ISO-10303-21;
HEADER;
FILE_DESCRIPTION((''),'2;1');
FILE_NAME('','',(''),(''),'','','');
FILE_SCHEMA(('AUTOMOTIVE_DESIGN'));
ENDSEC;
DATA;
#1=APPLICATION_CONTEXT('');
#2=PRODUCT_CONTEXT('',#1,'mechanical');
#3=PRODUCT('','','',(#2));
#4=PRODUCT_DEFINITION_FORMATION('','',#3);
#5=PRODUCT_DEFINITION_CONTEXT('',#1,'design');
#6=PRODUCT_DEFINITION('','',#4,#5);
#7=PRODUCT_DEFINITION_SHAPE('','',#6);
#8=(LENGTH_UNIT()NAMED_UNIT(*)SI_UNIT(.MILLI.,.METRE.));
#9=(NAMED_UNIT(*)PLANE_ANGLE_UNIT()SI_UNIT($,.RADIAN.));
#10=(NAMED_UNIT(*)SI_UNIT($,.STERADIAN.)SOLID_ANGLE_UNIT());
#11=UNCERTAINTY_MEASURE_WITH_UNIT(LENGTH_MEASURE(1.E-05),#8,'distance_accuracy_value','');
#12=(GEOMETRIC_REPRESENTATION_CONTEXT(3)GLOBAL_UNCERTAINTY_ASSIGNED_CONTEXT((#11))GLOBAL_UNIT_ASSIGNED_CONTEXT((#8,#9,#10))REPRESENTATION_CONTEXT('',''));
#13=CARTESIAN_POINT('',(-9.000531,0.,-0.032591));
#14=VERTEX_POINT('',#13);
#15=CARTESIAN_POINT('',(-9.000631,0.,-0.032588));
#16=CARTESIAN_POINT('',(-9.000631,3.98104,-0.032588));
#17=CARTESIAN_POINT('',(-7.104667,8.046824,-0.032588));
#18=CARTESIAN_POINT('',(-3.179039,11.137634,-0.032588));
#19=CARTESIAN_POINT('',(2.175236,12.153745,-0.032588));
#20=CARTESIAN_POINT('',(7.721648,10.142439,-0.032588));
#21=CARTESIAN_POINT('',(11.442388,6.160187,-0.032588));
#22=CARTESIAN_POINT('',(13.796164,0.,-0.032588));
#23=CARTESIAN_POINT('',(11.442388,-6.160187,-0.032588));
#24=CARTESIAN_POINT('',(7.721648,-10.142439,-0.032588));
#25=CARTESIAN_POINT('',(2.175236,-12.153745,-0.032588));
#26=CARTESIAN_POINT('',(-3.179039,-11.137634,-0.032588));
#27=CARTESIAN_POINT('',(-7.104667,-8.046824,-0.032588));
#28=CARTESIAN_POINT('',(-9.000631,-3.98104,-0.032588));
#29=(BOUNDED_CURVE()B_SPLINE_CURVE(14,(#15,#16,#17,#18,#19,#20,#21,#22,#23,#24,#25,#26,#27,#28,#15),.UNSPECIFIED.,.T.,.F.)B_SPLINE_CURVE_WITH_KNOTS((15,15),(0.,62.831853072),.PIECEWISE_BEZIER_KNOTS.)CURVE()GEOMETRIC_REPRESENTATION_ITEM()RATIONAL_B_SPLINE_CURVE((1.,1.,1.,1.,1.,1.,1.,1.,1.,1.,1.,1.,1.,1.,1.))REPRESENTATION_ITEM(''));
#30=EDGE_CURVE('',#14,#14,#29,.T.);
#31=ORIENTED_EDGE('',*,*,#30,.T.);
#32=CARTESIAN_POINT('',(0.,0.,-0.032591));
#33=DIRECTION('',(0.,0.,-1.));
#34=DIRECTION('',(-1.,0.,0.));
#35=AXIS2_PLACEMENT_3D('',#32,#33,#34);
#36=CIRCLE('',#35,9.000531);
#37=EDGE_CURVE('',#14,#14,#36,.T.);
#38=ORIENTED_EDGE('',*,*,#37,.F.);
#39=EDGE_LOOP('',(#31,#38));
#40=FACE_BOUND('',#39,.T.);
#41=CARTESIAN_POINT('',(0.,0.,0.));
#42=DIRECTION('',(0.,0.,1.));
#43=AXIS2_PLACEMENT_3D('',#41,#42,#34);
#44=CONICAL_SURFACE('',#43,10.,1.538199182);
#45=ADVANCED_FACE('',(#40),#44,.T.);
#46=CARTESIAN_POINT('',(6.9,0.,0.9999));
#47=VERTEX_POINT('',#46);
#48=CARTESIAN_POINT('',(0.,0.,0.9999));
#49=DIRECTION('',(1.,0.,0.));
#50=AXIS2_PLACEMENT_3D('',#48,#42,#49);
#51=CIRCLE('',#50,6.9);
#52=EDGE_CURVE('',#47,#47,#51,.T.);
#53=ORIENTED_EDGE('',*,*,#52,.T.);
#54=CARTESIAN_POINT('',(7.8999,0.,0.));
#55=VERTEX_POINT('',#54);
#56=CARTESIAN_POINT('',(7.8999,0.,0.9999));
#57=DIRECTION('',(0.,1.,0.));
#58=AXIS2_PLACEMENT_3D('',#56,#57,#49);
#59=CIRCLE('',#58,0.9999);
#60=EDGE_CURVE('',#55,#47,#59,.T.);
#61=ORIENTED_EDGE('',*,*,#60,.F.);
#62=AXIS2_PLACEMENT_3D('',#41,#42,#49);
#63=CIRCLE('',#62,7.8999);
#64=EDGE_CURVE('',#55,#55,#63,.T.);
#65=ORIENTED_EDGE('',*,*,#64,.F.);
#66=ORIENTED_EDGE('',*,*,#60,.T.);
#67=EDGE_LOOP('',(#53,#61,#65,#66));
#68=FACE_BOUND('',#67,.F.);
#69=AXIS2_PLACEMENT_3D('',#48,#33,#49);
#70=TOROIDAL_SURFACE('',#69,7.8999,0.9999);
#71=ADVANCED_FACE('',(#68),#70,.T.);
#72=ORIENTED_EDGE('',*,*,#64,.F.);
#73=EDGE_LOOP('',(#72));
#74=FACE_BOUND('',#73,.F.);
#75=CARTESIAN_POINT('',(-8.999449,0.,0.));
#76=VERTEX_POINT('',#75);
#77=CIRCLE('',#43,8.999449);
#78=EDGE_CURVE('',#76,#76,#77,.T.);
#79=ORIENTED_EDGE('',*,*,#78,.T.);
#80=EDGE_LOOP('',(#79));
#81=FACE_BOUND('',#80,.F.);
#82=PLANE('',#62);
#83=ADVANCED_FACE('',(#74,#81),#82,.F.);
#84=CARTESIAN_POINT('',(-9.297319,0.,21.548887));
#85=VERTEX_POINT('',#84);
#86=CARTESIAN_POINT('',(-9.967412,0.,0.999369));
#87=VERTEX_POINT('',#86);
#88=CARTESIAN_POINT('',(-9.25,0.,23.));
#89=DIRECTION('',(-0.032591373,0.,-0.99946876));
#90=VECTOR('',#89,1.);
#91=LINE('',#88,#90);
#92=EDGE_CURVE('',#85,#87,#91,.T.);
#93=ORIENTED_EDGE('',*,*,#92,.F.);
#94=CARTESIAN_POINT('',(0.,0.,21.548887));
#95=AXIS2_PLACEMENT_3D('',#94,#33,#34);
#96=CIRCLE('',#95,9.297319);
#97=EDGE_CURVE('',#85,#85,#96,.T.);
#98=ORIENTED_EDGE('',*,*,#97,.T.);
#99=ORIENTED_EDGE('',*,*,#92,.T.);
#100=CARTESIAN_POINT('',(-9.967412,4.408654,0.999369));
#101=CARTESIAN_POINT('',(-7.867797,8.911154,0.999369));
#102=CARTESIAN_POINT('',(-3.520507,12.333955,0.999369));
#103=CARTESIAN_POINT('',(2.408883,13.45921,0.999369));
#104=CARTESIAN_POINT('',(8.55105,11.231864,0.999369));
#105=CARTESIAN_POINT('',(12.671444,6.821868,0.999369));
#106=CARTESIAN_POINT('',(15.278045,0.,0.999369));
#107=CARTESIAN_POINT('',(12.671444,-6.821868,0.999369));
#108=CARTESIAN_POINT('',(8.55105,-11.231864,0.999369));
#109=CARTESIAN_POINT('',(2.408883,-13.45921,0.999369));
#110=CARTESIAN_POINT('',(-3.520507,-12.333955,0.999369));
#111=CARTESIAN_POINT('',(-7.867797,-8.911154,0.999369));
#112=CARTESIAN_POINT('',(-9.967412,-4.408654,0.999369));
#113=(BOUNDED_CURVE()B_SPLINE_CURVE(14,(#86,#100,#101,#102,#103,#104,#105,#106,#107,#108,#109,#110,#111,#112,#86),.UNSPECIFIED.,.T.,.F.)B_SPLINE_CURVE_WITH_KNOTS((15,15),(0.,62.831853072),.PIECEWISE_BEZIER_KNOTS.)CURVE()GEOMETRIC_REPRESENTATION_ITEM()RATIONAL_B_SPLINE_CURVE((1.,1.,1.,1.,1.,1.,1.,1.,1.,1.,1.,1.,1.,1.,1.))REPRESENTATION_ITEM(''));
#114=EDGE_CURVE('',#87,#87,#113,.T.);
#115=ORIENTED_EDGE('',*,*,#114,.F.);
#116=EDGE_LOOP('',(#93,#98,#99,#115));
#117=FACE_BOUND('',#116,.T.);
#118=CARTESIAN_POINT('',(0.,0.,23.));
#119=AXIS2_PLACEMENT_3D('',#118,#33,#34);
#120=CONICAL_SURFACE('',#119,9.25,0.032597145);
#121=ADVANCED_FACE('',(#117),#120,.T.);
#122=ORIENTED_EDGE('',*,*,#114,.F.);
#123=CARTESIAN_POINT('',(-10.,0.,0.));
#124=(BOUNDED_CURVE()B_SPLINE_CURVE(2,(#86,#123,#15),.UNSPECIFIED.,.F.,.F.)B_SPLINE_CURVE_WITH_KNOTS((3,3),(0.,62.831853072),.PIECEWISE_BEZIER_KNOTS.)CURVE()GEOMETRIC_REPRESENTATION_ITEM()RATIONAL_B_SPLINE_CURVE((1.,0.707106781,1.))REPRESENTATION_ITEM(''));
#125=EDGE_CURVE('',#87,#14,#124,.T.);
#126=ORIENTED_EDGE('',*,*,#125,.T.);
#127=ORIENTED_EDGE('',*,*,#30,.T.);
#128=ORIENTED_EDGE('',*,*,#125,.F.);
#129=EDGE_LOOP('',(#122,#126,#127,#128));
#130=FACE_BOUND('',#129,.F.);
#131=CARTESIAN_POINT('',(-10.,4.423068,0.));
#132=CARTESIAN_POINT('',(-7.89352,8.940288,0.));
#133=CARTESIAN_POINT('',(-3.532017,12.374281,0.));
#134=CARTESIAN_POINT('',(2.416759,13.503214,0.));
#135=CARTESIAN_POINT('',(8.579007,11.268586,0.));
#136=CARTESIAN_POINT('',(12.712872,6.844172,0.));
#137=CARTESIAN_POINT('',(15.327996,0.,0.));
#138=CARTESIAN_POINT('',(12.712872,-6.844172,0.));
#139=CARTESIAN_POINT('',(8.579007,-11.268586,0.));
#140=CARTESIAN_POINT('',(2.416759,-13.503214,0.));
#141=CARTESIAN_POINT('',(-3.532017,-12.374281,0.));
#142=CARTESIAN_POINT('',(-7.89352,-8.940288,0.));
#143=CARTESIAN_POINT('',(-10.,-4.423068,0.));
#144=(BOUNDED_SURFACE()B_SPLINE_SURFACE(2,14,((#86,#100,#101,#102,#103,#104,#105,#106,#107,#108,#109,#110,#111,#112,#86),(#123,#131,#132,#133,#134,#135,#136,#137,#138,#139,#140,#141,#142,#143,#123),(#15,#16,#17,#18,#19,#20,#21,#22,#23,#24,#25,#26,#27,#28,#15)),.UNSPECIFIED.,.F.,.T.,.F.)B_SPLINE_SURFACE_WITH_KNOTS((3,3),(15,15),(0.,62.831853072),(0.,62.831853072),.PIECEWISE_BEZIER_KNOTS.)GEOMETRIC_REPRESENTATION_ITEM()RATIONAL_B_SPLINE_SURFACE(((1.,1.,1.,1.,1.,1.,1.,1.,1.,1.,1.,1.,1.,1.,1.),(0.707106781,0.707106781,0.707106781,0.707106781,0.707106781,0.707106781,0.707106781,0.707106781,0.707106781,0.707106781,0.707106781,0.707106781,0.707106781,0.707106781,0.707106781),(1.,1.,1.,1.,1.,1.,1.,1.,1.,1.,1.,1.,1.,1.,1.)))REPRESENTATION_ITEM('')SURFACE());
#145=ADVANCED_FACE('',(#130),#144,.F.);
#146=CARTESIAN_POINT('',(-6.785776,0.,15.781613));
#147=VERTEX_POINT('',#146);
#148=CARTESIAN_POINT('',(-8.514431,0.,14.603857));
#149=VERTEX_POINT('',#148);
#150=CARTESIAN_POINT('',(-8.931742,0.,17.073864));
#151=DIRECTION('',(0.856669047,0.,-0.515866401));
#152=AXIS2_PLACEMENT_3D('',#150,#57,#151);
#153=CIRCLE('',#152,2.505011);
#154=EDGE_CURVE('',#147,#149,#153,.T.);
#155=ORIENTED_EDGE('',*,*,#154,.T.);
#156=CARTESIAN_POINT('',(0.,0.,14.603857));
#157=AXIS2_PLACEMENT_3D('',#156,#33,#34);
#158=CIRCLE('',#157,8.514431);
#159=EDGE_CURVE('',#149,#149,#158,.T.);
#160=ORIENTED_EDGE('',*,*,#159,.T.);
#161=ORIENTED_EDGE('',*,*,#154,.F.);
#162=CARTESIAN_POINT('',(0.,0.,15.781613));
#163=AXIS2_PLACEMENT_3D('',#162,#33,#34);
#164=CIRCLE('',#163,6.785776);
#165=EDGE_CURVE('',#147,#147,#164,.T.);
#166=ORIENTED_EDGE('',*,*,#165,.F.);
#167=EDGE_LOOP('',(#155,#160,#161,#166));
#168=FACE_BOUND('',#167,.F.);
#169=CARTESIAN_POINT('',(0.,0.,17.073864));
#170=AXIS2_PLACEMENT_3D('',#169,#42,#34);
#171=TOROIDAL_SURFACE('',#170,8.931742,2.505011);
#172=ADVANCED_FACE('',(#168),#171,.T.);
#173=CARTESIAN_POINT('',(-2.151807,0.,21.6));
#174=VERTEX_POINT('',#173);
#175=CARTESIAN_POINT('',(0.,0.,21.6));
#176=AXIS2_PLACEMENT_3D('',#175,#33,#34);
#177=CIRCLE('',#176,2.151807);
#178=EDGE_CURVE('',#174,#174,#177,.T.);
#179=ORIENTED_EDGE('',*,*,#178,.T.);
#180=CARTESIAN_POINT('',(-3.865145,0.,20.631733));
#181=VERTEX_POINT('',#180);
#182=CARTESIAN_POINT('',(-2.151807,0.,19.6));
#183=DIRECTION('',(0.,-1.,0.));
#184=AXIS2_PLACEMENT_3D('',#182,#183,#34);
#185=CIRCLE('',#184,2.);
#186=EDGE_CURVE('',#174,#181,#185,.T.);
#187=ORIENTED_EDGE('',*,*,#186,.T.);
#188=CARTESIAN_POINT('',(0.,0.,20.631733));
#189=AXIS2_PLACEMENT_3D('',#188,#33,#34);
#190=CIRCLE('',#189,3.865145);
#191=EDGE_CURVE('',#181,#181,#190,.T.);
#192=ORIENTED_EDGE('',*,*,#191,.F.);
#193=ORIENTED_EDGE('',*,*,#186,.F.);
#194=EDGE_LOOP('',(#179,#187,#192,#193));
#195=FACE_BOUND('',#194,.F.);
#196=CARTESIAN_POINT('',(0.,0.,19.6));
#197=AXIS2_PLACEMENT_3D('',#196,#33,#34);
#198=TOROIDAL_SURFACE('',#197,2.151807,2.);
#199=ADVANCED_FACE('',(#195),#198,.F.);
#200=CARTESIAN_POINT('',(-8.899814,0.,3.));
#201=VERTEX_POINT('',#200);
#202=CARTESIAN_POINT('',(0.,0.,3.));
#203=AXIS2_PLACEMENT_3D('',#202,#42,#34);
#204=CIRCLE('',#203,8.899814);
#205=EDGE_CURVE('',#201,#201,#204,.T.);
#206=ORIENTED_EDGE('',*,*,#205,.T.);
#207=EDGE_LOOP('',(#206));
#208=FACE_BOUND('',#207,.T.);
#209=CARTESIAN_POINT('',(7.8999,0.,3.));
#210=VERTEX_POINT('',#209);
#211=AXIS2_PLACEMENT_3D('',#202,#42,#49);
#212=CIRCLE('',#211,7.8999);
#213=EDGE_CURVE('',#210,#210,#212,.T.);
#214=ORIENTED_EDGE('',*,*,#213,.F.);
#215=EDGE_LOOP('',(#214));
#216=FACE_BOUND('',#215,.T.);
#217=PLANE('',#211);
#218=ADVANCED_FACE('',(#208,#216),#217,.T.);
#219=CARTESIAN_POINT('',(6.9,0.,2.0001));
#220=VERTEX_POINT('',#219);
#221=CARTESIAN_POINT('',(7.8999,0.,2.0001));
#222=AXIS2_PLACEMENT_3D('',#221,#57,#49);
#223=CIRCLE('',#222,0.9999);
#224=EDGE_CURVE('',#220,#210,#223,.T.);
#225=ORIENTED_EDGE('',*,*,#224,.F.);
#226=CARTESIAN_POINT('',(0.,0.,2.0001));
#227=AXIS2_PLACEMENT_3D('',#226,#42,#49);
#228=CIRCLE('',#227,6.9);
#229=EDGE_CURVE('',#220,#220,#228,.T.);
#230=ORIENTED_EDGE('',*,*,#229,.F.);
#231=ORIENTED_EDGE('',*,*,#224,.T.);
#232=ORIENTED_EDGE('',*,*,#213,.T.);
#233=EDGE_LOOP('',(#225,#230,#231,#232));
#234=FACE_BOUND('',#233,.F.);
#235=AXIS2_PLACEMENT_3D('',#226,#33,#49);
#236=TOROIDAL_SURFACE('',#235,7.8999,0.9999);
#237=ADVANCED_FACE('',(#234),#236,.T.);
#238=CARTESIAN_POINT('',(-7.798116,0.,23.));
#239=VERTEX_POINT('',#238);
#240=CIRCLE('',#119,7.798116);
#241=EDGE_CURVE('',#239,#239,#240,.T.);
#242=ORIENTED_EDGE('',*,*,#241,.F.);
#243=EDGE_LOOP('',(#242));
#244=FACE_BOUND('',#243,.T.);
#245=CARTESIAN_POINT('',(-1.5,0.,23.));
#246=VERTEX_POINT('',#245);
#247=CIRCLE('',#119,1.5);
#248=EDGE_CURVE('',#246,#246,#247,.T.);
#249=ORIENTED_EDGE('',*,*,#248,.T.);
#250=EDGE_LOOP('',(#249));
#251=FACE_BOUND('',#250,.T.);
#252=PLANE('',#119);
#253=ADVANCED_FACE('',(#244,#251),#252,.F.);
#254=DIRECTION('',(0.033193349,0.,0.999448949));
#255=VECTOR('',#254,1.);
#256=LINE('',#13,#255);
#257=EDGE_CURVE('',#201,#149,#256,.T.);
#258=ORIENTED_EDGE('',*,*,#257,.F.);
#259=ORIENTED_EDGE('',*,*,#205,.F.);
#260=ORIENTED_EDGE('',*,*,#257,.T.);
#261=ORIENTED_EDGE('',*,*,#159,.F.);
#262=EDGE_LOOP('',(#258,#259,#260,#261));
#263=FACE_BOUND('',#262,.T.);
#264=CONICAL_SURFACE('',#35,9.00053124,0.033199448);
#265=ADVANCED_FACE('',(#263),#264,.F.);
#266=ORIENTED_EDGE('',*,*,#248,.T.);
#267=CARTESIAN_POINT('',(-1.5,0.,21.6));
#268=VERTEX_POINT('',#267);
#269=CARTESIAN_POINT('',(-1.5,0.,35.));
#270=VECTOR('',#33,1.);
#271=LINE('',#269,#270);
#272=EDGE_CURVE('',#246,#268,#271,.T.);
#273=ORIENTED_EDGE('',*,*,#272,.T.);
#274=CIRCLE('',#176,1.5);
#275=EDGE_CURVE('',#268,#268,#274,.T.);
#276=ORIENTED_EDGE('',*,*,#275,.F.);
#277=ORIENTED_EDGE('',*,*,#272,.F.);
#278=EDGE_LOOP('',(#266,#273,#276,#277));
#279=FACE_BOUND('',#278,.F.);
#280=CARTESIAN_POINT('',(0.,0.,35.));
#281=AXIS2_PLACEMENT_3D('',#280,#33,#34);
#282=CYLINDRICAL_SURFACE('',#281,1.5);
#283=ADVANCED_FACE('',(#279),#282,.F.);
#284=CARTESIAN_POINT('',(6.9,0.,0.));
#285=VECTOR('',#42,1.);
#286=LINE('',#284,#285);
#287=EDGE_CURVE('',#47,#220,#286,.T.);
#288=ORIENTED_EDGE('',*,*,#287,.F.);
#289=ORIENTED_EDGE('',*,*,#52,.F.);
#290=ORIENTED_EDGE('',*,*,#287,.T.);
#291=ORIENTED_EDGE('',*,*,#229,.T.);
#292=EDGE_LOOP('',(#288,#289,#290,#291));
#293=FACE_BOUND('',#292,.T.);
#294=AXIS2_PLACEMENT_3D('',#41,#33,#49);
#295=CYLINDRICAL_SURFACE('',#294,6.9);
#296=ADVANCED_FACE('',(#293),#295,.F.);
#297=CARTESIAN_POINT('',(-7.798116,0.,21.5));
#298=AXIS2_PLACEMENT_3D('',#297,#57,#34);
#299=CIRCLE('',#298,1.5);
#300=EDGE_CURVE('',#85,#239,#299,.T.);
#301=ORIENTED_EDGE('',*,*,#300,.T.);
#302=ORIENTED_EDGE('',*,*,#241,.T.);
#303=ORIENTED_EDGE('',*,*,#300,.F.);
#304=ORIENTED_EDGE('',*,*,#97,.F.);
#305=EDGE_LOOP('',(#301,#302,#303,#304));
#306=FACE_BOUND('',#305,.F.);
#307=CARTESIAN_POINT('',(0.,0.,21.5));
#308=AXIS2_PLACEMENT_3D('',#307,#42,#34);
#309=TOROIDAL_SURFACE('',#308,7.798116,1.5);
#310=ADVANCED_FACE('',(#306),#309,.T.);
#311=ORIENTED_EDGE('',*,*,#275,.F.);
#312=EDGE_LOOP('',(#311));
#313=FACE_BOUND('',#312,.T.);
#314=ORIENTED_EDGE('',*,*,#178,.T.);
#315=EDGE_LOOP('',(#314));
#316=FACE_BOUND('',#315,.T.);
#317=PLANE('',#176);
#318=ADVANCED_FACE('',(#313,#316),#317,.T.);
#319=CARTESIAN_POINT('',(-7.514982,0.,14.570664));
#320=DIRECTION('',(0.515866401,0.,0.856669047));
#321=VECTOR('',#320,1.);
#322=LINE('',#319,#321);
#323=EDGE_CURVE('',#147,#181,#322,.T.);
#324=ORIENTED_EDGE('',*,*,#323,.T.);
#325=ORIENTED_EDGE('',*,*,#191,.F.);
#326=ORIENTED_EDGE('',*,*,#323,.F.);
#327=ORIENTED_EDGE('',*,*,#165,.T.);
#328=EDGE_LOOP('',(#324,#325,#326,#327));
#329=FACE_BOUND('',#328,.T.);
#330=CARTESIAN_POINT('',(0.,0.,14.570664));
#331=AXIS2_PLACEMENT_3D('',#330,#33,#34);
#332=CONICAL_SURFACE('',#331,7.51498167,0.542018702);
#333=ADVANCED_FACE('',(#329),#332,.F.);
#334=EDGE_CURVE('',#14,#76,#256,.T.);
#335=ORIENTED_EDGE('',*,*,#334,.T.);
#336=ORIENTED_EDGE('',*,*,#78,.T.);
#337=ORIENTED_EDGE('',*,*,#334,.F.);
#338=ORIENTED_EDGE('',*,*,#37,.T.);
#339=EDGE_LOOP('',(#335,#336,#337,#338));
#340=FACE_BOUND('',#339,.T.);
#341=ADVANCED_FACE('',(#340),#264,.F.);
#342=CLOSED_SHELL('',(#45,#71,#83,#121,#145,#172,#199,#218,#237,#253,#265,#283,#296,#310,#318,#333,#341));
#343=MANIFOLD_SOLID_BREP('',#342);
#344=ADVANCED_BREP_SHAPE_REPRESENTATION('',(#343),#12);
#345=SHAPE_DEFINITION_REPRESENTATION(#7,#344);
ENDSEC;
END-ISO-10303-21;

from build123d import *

# Parameters (mm, degrees)
F1_R     = 9
F1_R_2   = 6.9
F4_DEPTH = 3
F7_D     = 3
F7_DEPTH = 12
F7_TIP   = 0.9012909285
F8_R     = 1.5
F9_R     = 0.9999
F11_R    = 2


# Not quite as in the source:
# - a fillet or chamfer that OpenCascade refuses, or shapes differently, is made with other operations: its cross-section is extruded or revolved along the edge and cut away or added
# - a fillet or chamfer is up to 0.001 mm smaller than in the source, because OpenCascade refuses the exact size


with BuildPart() as f2:
    # F0 (on Front) → F2 (revolve)
    with BuildSketch(Plane.XZ):
        Polygon((0, 21.6), (0, 23), (-9.25, 23), (-10, 0), (-9.0005312399, -0.0325913726), (-8.5144306185, 14.6038573573), (-8.2820771734, 21.6), (-3.2820771734, 21.6), align=None)
        Polygon((-7.5149816695, 14.570664008), (-3.2820771734, 21.6), (-8.2820771734, 21.6), (-8.5144306185, 14.6038573573), align=None)
    revolve(axis=Axis((0, 0, 12.5640318729), (0, 0, -1)))

    # F0 (on Front) → F3 (revolve)
    with BuildSketch(Plane.XZ):
        Polygon((0, 21.6), (0, 23), (-9.25, 23), (-10, 0), (-9.0005312399, -0.0325913726), (-8.5144306185, 14.6038573573), (-8.2820771734, 21.6), (-3.2820771734, 21.6), align=None)
        Polygon((-7.5149816695, 14.570664008), (-3.2820771734, 21.6), (-8.2820771734, 21.6), (-8.5144306185, 14.6038573573), align=None)
    revolve(axis=Axis((0, 0, 12.5640318729), (0, 0, -1)))

    # F1 (on Top) → F4 (join)
    with BuildSketch(Plane.XY):
        Circle(F1_R)
        Circle(F1_R_2, mode=Mode.SUBTRACT)
    extrude(amount=F4_DEPTH)

    # F7
    with Locations(Plane.XY.offset(23)):
        with Locations((0, 0)):
            Hole(F7_D / 2, depth=F7_DEPTH)
            with Locations((0, 0, -(F7_DEPTH + F7_TIP / 2))):  # 118° drill point
                Cone(0, F7_D / 2, F7_TIP, mode=Mode.SUBTRACT)

    # F8
    f8_edges = [f2.edges().sort_by_distance(p)[0] for p in [
        (9.25, 0, 23),
    ]]
    fillet(f8_edges, radius=F8_R)

    # F9 (radius 1 in the source; OpenCascade refuses exactly that, so slightly less here)
    f9_edges = [f2.edges().sort_by_distance(p)[0] for p in [
        (10, 0, 0),
        (-6.9, 0, 0),
        (-6.9, 0, 3),
    ]]
    fillet(f9_edges, radius=F9_R)

    # F10: fillet of radius 2.5050114492 on 1 edges, made by hand

    # F10_s1 → F10_t2 (revolve, cut)
    with BuildSketch(Plane.XZ):
        with BuildLine():
            ThreePointArc((-6.7857760688, 15.781612939), (-7.5212900372, 15.0036690027), (-8.5144306185, 14.6038573573))
            Line((-8.5144306185, 14.6038573573), (-8.506084394, 14.5544572209))
            ThreePointArc((-8.506084394, 14.5544572209), (-8.0163691384, 14.5371880615), (-7.5166446639, 14.5205913868))
            Line((-7.5166446639, 14.5205913868), (-7.4720623541, 14.5448189832))
            Line((-7.4720623541, 14.5448189832), (-6.7428567534, 15.7557679142))
            Line((-6.7428567534, 15.7557679142), (-6.7857760688, 15.781612939))
        make_face()
    revolve(axis=Axis((0, 0, 14.570664008), (0, 0, -1)), mode=Mode.SUBTRACT)

    # F11
    f11_edges = [f2.edges().sort_by_distance(p)[0] for p in [
        (3.282077, 0, 21.6),
    ]]
    fillet(f11_edges, radius=F11_R)


solid = f2.part
